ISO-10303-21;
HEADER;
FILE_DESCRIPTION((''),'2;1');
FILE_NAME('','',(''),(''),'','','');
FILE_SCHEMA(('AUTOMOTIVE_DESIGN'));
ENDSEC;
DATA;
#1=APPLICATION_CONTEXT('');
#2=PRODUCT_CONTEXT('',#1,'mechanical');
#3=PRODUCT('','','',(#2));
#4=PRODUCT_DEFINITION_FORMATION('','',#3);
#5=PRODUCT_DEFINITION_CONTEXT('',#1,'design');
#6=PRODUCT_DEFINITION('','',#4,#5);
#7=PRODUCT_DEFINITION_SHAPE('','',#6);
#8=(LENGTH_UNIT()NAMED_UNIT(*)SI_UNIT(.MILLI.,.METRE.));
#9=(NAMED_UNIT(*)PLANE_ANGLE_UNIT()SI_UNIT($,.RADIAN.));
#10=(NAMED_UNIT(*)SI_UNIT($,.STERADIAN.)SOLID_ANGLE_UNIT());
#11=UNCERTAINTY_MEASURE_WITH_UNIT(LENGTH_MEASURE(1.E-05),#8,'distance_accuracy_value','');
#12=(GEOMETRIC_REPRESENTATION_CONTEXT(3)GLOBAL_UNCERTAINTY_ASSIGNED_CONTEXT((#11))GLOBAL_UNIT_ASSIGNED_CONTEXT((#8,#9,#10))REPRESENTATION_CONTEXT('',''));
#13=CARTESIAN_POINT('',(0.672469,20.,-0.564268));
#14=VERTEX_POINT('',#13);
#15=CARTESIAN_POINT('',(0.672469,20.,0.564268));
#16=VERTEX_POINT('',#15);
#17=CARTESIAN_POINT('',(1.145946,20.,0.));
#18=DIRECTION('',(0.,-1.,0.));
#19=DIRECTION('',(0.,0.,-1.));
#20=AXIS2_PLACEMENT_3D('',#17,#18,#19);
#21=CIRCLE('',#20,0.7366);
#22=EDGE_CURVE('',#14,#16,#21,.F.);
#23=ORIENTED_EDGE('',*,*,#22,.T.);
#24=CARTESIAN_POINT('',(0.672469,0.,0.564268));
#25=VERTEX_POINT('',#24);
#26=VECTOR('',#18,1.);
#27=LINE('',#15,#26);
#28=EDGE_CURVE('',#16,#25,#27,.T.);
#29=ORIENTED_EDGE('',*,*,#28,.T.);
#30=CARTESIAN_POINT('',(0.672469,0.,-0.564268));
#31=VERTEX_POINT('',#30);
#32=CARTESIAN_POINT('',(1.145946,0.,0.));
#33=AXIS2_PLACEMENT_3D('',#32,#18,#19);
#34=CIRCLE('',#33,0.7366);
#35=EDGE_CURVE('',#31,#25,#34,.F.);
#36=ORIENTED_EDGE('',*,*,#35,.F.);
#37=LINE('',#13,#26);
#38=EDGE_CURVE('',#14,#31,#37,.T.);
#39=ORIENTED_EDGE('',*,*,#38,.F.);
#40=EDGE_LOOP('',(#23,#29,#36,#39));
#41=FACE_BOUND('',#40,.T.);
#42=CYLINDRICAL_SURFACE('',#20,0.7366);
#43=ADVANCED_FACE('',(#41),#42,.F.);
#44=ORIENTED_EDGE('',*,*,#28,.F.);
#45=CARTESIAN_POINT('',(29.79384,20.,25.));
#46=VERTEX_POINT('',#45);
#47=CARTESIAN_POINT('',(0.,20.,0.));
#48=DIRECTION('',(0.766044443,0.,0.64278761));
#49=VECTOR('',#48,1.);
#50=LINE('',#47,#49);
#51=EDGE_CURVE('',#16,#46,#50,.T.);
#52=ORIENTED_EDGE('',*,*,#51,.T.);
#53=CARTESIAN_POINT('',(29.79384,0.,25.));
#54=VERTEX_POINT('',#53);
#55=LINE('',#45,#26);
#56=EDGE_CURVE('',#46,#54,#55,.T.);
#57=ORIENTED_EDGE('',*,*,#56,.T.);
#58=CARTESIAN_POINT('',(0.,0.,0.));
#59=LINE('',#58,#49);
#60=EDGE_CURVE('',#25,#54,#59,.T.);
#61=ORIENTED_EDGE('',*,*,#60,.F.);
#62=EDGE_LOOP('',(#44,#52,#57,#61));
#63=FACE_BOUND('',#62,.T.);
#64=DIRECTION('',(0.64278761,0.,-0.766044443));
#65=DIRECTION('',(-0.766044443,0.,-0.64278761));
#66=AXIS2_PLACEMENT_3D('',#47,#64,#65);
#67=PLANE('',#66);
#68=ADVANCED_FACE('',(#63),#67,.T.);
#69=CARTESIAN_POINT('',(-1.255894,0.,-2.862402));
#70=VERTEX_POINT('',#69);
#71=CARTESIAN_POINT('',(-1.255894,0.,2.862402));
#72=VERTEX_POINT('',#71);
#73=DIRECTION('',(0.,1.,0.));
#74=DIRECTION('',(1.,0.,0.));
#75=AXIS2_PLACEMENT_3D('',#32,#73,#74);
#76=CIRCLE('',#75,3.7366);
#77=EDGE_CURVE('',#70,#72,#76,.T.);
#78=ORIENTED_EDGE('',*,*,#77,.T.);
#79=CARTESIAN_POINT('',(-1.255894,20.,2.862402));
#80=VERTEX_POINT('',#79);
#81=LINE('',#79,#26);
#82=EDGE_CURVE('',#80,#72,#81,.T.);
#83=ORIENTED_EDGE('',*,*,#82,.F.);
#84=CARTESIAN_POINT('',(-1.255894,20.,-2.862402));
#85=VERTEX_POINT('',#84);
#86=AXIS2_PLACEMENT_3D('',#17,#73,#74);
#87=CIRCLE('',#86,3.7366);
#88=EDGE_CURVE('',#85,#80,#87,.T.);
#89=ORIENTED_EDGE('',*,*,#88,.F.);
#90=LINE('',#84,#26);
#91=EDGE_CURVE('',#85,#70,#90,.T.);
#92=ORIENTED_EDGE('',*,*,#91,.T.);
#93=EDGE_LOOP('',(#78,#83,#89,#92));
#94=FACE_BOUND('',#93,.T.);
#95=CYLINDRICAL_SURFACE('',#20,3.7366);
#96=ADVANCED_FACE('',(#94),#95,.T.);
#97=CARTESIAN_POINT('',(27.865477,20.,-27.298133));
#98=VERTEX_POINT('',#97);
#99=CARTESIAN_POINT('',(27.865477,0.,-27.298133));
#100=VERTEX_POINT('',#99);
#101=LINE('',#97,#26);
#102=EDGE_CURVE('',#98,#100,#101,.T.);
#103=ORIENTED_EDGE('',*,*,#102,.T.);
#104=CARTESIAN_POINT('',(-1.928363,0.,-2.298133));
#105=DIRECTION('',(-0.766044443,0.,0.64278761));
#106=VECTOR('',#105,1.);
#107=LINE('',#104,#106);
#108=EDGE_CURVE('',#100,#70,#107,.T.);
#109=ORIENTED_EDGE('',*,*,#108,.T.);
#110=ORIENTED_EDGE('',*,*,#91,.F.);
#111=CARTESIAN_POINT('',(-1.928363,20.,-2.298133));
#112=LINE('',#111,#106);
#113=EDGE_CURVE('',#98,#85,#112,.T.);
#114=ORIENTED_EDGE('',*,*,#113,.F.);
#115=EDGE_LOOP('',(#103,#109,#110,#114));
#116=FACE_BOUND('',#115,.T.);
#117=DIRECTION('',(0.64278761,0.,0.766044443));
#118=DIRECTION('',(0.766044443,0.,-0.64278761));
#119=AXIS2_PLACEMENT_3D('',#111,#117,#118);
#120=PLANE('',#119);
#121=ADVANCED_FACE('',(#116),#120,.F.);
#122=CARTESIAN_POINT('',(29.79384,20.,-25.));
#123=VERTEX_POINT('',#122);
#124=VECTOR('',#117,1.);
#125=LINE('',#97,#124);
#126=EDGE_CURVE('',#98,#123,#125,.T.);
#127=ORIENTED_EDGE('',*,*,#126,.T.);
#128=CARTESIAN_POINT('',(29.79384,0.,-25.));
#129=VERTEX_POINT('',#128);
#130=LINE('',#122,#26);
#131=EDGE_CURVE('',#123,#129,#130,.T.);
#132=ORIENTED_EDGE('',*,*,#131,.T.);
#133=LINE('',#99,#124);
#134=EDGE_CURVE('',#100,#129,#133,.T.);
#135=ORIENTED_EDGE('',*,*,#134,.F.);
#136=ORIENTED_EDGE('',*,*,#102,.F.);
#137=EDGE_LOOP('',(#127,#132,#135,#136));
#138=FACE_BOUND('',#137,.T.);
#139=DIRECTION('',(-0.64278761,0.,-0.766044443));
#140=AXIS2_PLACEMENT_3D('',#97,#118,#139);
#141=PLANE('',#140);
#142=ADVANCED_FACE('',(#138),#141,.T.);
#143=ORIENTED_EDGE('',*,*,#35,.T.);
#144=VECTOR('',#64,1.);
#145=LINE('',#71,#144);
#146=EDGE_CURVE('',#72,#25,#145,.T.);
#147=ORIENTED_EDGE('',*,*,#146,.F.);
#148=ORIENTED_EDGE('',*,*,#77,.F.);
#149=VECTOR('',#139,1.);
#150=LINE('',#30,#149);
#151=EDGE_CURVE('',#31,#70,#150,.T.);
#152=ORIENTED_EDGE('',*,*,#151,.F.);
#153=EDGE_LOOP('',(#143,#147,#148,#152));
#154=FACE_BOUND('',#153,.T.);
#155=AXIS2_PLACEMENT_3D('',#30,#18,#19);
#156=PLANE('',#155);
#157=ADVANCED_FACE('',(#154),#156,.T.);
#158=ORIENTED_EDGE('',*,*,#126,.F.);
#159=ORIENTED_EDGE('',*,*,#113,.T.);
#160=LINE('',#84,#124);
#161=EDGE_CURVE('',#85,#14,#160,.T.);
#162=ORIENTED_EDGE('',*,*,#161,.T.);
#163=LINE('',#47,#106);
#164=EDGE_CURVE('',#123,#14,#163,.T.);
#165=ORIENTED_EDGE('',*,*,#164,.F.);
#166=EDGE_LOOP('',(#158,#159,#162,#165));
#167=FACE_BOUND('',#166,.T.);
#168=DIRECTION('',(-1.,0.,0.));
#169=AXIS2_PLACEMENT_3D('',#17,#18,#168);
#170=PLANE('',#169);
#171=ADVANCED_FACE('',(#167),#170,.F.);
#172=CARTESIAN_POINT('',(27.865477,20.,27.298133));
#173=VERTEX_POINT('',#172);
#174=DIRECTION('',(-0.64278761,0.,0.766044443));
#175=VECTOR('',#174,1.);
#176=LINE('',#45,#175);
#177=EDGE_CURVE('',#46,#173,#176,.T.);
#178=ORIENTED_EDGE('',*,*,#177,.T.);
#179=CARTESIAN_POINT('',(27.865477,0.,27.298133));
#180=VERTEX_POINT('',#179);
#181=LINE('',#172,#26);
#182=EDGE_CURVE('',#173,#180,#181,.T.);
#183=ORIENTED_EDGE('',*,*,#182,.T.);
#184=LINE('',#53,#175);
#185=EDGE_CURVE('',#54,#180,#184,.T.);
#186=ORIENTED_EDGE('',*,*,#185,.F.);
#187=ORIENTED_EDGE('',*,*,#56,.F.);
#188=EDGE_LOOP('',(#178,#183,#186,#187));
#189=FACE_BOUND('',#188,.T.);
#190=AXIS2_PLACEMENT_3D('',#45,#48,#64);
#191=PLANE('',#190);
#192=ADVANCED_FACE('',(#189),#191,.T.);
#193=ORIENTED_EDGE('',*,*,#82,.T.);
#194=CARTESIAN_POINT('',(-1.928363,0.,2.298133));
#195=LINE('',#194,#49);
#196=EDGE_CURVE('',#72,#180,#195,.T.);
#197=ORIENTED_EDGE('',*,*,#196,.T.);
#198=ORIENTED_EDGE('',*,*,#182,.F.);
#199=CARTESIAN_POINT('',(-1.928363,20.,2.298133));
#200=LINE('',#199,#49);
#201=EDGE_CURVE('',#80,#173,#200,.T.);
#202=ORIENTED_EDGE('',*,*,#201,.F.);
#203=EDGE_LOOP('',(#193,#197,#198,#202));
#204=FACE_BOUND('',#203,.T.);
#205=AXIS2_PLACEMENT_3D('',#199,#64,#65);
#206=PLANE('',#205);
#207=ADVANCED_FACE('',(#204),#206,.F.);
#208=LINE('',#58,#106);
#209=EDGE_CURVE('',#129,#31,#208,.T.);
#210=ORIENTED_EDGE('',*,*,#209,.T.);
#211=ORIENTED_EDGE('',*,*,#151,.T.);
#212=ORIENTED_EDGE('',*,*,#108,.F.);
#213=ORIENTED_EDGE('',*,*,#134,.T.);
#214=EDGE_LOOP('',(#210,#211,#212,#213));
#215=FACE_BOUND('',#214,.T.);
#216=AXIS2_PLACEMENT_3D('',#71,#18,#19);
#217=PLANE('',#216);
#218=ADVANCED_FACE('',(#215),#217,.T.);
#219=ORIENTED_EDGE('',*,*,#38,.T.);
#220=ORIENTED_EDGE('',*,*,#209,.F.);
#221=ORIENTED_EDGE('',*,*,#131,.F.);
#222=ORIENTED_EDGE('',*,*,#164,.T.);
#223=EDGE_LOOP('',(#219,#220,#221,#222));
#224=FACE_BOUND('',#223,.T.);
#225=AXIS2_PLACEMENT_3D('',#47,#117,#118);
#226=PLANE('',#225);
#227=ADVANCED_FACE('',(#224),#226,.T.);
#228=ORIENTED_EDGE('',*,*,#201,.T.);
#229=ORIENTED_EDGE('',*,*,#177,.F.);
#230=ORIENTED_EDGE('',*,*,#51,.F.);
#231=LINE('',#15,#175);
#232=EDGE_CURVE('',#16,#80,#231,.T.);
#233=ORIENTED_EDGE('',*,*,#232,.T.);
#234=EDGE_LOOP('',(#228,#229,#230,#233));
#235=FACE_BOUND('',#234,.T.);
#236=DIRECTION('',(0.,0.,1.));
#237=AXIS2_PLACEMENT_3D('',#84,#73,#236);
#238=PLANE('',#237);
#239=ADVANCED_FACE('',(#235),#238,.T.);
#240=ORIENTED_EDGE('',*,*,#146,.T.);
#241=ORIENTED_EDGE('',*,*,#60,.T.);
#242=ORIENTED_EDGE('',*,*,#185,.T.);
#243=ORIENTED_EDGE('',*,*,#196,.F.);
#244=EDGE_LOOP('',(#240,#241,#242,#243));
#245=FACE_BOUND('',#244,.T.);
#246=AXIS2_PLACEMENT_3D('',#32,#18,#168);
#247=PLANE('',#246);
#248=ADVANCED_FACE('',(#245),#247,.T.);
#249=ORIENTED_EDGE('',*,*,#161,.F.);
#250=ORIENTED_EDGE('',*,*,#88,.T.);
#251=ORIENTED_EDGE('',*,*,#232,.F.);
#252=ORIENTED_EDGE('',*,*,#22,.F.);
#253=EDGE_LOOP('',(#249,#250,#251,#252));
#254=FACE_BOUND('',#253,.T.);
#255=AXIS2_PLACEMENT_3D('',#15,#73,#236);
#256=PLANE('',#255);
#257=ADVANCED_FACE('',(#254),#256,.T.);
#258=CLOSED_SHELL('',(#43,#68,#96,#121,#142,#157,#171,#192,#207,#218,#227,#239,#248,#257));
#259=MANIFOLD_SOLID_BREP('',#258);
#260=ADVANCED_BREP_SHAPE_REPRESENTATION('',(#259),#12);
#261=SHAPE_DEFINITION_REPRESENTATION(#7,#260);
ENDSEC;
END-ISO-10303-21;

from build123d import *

# Parameters (mm, degrees)
SM_BASE_FLANGE_1_DEPTH = 20


# Sheet-metal steps are written as plain solids
with BuildPart() as part:
    # Sketch 1 → 基体-法兰1 (new body)
    with BuildSketch(Plane(origin=(0, 0, 0), x_dir=(1, 0, 0), z_dir=(0, 1, 0))):
        with BuildLine():
            Line((29.793839815, -25), (0.672468818, -0.564268337))
            ThreePointArc((0.672468818, -0.564268337), (0.409346171, 0), (0.672468818, 0.564268337))
            Line((0.672468818, 0.564268337), (29.793839815, 25))
            Line((29.793839815, 25), (27.865476986, 27.298133329))
            Line((27.865476986, 27.298133329), (-1.255894011, 2.862401666))
            ThreePointArc((-1.255894011, 2.862401666), (-2.590653829, 0), (-1.255894011, -2.862401666))
            Line((-1.255894011, -2.862401666), (27.865476986, -27.298133329))
            Line((27.865476986, -27.298133329), (29.793839815, -25))
        make_face()
    extrude(amount=SM_BASE_FLANGE_1_DEPTH)


solid = part.part
